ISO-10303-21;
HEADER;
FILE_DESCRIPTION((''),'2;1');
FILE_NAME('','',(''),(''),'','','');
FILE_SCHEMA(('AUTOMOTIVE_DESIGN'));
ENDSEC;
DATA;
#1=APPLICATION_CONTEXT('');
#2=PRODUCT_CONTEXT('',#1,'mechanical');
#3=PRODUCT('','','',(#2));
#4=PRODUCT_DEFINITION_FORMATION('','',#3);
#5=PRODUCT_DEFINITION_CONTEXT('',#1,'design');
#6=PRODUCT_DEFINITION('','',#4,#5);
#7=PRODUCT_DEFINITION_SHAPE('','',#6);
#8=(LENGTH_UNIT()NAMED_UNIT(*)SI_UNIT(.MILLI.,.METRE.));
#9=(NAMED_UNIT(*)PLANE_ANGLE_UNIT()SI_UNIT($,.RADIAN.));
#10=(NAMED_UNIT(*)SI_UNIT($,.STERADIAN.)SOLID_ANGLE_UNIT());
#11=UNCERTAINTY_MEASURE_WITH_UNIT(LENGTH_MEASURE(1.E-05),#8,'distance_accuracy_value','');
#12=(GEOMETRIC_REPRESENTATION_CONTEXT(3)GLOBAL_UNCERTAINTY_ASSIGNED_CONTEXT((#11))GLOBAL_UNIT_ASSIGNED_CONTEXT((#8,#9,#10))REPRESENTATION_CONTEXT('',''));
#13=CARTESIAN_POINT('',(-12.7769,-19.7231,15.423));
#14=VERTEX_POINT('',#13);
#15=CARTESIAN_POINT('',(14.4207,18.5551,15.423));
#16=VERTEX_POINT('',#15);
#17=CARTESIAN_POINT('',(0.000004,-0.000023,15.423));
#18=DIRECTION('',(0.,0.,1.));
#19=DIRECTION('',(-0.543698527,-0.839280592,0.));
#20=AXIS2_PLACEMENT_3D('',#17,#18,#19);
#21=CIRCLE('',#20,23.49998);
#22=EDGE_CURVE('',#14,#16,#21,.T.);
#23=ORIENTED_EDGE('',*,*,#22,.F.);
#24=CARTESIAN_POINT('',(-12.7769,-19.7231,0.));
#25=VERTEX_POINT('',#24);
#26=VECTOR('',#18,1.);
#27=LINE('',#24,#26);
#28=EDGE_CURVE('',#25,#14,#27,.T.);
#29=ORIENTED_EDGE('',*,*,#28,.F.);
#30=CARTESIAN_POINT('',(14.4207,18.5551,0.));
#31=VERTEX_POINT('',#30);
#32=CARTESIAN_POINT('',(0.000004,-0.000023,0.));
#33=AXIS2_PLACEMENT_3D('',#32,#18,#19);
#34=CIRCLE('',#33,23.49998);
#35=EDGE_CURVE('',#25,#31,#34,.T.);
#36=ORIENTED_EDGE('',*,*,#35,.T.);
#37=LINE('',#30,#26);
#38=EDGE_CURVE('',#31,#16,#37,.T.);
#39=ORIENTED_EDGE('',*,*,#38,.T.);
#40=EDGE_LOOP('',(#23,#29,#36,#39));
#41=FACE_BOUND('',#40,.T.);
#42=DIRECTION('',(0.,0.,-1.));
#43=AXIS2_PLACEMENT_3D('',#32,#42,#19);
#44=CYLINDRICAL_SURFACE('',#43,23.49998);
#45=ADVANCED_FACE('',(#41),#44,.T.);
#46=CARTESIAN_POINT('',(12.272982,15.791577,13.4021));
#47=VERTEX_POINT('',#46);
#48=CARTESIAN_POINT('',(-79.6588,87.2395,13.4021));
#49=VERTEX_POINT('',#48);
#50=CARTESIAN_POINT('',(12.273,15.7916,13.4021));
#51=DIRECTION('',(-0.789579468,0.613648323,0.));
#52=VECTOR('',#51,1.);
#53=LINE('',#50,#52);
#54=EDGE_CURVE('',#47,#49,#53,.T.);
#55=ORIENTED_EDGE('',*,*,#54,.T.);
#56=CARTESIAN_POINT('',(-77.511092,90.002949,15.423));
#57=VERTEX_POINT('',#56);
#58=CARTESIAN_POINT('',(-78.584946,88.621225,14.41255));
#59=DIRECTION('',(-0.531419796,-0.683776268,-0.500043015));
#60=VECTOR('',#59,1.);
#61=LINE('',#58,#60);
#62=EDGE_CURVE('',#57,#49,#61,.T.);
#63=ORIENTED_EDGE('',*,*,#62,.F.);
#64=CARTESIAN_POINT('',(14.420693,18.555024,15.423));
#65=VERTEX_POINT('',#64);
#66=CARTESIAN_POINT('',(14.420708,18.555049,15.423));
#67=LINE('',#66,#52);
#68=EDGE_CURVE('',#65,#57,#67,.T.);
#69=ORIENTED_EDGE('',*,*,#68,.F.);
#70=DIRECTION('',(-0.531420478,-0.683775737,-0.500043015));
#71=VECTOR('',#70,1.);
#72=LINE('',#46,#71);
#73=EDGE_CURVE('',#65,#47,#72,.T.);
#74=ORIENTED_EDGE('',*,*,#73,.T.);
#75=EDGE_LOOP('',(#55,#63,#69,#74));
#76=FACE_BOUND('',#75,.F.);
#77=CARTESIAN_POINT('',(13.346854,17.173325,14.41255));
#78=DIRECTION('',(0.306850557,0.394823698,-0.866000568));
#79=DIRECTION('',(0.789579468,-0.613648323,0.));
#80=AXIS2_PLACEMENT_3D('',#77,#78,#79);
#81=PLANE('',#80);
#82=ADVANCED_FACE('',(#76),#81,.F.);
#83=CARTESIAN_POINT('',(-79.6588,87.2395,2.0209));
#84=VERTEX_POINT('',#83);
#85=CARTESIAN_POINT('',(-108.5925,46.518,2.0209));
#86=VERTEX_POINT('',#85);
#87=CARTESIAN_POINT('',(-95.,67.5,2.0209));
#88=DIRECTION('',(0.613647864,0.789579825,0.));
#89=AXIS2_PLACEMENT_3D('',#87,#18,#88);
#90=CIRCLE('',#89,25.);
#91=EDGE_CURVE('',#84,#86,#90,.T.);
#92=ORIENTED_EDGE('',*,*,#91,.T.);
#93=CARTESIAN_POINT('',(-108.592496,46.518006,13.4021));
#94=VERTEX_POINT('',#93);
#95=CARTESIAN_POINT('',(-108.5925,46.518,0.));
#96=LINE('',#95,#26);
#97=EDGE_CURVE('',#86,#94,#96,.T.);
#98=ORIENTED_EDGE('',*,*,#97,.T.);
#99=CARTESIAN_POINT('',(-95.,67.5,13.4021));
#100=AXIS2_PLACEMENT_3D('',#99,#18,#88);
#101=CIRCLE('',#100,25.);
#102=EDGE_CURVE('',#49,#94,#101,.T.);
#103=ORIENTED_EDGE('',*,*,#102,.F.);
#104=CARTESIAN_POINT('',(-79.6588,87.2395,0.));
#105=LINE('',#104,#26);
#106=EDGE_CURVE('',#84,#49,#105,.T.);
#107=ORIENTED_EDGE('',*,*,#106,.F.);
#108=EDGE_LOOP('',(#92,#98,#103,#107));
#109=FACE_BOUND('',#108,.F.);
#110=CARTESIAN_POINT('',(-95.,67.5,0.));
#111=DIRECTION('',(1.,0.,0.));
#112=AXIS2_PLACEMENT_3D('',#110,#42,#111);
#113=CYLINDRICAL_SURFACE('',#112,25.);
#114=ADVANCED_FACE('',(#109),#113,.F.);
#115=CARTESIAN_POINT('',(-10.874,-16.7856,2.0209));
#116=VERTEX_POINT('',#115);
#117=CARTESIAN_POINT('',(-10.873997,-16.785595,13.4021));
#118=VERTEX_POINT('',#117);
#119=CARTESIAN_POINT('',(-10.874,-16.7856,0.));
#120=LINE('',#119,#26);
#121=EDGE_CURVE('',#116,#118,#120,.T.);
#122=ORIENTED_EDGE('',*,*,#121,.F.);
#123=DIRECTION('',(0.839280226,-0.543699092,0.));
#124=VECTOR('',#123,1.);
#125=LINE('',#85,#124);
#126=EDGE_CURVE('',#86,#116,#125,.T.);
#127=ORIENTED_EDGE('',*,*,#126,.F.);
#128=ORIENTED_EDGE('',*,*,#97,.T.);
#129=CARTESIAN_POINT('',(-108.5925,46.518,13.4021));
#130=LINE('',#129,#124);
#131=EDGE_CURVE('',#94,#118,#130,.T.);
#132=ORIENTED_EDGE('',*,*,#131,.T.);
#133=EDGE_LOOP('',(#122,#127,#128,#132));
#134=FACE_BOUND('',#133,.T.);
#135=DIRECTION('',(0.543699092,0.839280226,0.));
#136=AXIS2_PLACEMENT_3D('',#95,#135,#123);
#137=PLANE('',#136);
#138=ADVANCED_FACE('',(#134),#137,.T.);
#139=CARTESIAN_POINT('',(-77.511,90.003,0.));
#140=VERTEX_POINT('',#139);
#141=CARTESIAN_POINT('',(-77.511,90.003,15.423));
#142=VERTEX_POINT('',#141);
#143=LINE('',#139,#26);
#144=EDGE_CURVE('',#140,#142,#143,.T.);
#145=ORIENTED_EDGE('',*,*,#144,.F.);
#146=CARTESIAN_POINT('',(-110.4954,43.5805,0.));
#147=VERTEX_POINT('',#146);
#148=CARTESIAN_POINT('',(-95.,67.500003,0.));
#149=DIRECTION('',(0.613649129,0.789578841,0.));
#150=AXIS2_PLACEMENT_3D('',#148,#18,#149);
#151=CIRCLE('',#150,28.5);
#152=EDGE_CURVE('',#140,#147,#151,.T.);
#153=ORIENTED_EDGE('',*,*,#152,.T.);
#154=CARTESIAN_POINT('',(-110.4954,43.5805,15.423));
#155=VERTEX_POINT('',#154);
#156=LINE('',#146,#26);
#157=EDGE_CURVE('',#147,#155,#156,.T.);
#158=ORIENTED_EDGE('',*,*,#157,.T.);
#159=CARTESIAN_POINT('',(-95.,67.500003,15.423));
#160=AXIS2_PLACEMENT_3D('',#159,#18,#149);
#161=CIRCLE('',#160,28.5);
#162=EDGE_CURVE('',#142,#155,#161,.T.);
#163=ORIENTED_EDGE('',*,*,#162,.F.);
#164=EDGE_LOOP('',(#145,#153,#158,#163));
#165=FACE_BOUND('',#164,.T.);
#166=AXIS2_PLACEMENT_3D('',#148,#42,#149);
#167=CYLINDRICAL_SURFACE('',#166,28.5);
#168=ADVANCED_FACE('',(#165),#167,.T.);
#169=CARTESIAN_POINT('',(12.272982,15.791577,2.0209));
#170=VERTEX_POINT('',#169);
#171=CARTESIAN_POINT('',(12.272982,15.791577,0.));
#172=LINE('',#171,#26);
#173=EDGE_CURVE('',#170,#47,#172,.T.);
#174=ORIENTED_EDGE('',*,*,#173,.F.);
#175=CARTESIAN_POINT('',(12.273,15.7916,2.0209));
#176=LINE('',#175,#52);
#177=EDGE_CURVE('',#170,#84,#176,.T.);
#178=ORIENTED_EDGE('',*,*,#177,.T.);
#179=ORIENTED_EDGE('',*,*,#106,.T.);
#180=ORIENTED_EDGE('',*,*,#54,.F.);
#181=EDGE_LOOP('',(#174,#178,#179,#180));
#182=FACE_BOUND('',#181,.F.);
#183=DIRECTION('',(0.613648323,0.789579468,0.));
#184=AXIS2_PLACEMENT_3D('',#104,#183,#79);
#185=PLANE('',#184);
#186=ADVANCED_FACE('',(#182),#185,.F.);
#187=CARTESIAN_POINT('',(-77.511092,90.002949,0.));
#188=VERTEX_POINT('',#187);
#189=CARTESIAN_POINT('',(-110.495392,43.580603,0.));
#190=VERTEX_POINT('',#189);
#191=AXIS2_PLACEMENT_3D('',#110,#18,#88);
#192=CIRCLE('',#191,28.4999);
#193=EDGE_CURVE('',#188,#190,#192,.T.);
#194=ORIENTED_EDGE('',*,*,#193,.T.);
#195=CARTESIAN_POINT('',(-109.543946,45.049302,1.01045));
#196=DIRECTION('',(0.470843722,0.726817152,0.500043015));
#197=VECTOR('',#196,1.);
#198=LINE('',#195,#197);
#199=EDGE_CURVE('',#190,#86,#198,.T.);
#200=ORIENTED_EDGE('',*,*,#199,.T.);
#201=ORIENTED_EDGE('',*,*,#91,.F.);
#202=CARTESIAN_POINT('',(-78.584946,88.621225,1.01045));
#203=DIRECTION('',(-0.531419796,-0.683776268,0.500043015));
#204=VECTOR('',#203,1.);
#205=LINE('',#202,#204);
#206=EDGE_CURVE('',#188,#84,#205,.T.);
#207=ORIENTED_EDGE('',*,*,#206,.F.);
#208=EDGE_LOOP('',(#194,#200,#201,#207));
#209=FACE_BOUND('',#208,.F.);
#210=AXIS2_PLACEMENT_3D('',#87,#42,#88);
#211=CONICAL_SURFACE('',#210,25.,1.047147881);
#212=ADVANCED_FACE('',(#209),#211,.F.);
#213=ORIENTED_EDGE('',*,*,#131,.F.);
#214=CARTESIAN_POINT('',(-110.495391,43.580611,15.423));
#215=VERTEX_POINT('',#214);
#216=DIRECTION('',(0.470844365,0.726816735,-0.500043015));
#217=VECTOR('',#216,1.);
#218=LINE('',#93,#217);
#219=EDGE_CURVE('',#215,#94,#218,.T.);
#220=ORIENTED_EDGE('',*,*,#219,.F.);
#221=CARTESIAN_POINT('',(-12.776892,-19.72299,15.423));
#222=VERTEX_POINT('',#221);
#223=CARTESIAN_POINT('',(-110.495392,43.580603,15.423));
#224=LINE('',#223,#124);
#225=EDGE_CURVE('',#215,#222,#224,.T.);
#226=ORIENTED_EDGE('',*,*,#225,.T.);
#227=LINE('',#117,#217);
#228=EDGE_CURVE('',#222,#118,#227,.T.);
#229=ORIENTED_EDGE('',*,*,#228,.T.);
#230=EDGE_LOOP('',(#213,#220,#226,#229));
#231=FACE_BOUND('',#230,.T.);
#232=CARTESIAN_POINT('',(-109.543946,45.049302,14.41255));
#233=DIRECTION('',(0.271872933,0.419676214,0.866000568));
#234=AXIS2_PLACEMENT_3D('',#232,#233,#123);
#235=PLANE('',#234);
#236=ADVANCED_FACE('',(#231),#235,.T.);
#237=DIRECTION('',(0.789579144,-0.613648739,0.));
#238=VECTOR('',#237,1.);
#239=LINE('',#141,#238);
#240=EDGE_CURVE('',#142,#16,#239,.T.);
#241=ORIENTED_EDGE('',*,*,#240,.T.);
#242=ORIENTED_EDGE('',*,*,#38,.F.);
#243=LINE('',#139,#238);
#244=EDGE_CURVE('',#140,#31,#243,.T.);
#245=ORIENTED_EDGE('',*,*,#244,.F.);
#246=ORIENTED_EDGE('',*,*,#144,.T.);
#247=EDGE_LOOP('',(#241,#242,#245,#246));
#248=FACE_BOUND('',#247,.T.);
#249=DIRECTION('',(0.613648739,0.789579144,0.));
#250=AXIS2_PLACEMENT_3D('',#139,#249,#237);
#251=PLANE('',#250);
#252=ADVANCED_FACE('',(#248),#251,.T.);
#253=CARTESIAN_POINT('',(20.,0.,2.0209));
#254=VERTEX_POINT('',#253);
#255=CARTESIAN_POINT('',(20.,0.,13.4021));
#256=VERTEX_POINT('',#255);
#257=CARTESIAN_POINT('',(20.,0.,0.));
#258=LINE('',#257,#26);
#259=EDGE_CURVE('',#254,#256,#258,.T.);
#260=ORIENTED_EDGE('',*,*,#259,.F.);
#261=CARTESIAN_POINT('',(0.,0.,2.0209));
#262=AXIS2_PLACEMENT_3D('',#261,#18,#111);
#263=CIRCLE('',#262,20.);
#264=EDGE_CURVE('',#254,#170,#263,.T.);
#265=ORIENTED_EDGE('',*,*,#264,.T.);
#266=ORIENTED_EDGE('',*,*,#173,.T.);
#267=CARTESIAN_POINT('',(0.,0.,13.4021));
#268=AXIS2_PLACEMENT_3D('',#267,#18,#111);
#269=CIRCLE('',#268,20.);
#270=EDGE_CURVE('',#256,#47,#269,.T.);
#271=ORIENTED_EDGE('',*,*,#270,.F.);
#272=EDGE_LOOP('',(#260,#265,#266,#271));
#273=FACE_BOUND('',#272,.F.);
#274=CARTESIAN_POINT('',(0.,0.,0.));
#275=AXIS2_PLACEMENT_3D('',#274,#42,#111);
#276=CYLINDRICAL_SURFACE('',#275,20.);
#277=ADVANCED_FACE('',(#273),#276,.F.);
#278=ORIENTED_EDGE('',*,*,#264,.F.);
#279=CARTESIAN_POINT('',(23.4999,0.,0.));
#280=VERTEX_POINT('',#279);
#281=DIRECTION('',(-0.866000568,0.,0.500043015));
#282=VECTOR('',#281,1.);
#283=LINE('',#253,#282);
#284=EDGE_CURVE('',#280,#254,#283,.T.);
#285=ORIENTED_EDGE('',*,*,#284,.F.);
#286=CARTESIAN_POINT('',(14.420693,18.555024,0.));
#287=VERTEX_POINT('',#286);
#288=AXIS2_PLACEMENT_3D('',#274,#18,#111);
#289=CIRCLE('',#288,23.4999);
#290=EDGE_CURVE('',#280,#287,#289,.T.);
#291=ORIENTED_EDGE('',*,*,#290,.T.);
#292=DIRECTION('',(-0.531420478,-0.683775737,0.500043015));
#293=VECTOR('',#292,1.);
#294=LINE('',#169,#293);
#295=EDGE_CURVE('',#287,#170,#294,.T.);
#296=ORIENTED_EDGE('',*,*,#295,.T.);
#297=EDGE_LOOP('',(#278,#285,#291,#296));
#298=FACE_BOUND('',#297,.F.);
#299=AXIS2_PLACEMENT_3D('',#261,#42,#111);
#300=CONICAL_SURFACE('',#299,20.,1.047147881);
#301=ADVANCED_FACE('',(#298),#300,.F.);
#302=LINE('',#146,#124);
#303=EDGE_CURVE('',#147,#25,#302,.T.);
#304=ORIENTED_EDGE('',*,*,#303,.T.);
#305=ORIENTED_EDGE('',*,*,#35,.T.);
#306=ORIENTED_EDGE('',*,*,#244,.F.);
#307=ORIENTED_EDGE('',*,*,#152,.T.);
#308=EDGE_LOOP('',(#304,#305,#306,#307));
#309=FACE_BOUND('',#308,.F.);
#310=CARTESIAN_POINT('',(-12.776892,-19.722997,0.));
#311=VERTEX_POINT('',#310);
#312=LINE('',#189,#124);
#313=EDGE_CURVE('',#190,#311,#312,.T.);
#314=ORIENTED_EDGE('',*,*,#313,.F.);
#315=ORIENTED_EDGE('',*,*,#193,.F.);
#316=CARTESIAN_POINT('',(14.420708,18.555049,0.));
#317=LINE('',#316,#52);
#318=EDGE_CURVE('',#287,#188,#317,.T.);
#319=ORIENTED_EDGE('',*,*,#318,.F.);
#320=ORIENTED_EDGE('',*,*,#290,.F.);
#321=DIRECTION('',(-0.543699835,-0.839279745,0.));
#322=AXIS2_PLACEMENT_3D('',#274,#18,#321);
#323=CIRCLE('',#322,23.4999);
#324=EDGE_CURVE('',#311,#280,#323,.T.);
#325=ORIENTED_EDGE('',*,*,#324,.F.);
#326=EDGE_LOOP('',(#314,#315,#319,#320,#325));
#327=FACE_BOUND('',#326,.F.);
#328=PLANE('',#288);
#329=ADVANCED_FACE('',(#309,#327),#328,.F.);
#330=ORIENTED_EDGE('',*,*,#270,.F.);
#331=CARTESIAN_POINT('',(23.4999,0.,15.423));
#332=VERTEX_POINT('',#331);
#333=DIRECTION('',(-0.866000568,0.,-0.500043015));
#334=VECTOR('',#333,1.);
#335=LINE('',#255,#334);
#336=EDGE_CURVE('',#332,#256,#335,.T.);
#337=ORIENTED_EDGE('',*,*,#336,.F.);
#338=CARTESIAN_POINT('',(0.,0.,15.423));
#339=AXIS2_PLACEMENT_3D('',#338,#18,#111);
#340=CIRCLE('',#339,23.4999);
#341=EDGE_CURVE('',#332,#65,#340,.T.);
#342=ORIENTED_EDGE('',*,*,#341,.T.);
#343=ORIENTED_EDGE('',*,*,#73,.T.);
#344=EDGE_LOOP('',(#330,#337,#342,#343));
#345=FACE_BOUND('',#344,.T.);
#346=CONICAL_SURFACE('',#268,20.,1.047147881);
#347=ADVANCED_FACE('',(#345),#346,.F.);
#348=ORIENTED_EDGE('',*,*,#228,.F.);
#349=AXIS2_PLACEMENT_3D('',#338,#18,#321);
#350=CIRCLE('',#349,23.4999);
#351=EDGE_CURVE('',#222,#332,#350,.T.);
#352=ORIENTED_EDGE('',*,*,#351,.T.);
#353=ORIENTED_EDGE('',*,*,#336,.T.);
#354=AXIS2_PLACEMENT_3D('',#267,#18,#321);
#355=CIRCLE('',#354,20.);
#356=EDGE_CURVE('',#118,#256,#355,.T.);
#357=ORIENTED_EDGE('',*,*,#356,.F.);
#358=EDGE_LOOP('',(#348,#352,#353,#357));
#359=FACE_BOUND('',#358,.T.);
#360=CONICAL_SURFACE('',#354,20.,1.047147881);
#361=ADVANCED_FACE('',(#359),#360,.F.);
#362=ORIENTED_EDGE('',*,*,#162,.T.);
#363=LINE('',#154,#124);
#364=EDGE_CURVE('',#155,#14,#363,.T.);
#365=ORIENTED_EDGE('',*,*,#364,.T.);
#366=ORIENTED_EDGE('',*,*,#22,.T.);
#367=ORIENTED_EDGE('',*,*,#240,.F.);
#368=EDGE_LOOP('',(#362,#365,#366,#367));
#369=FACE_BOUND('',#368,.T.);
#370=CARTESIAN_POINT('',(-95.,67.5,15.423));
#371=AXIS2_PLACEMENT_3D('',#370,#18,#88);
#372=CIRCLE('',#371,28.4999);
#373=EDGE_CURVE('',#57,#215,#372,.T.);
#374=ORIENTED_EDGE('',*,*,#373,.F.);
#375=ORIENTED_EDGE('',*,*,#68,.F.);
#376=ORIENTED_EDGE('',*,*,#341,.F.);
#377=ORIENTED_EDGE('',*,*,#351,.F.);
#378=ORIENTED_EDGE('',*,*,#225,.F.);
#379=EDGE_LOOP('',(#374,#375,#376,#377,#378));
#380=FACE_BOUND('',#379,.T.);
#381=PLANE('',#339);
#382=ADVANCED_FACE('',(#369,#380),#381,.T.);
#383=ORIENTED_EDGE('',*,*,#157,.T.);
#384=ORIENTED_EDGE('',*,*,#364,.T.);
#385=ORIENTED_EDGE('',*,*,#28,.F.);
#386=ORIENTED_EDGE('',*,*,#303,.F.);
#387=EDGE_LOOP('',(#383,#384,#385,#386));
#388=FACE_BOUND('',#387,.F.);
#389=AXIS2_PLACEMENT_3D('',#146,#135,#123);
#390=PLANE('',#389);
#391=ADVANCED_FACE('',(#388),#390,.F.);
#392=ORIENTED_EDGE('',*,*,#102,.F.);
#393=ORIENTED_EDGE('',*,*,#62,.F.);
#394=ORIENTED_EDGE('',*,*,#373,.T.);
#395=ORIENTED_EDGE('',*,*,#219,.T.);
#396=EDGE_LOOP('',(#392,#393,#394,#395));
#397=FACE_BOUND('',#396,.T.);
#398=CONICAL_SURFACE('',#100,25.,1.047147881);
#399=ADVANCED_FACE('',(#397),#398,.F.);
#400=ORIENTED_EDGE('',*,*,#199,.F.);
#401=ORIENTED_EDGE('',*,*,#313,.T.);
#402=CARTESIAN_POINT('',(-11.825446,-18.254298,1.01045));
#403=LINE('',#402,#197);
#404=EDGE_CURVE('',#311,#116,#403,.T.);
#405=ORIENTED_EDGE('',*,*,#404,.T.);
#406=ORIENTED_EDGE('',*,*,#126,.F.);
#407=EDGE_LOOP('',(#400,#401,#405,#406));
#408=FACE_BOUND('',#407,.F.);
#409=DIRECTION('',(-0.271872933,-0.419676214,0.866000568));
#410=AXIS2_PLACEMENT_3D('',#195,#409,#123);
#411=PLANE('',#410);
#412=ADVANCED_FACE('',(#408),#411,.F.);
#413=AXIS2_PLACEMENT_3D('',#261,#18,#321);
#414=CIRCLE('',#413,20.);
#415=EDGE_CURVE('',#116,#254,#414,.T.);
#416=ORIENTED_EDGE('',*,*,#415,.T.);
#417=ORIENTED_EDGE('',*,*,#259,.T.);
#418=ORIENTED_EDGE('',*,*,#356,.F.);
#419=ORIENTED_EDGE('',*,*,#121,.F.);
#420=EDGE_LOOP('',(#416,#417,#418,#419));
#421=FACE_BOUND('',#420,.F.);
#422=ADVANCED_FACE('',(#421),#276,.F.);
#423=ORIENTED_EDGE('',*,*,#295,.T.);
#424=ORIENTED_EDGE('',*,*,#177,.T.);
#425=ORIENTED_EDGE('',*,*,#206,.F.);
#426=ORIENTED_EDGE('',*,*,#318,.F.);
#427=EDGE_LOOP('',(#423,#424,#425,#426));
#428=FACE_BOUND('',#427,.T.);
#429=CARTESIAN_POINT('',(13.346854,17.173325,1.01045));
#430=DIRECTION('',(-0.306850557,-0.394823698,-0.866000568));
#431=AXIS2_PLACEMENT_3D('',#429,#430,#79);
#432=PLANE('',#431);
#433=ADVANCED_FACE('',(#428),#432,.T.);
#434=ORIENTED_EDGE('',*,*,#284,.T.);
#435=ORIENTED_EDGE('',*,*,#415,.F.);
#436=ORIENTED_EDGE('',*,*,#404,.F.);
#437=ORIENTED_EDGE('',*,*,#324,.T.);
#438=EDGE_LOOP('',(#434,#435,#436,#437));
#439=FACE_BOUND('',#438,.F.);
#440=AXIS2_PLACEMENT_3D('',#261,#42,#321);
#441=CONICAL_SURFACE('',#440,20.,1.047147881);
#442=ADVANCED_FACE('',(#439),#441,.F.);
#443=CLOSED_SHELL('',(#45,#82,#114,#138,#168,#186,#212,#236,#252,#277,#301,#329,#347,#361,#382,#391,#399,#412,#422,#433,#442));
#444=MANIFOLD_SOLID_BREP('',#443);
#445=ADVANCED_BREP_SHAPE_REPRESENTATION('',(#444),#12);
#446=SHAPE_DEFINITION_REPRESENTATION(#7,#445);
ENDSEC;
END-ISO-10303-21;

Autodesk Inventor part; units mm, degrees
ref_plane "YZ Plane" through (0, 0, 0) normal (1, 0, 0) x (0, 1, 0)
ref_plane "XZ Plane" through (0, 0, 0) normal (0, 1, 0) x (-1, 0, 0)
ref_plane "XY Plane" through (0, 0, 0) normal (0, 0, 1) x (1, 0, 0)
sketch "草图1" plane through (0, 0, 0) normal (0, 0, 1) x (1, 0, 0)
  circle A0 centre (-95, 67.5) radius 25
  circle A1 centre (0, 0) radius 20
  line L0 (-79.6588, 87.2395) -> (12.273, 15.7916)
  line L1 (-108.5925, 46.518) -> (-10.874, -16.7856)
  line L2 (-77.511, 90.003) -> (14.4207, 18.5551)
  line L3 (-110.4954, 43.5805) -> (-12.7769, -19.7231)
  arc A2 (-77.511, 90.003) -> (-110.4954, 43.5805) centre (-95, 67.5) ccw
  arc A3 (-12.7769, -19.7231) -> (14.4207, 18.5551) centre (0, 0) ccw
  dimension "d0" = 50
  dimension "d1" = 40
  dimension "d2" = 95
  dimension "d3" = 67.5
  dimension "d4" = 3.5
  dimension "d5" = 3.5
extrude "拉伸1" add sketch "草图1" along normal blind 15.423
chamfer "倒角1" distance 3.5 distance2 2.021 4 edges at (16.3036, -11.5841, 15.423) (-59.7332, 14.8662, 15.423) (-115.3795, 81.9802, 15.423) (-33.6929, 51.5155, 15.423) measured on face at (-16.9391, 41.4499, 15.423)
chamfer "倒角2" distance 3.5 distance2 2.021 4 edges at (-59.7332, 14.8662, 0) (16.3036, -11.5841, 0) (-33.6929, 51.5155, 0) (-115.3795, 81.9802, 0) measured on face at (-16.9391, 41.4499, 0)
properties part number "砂轮皮带"
